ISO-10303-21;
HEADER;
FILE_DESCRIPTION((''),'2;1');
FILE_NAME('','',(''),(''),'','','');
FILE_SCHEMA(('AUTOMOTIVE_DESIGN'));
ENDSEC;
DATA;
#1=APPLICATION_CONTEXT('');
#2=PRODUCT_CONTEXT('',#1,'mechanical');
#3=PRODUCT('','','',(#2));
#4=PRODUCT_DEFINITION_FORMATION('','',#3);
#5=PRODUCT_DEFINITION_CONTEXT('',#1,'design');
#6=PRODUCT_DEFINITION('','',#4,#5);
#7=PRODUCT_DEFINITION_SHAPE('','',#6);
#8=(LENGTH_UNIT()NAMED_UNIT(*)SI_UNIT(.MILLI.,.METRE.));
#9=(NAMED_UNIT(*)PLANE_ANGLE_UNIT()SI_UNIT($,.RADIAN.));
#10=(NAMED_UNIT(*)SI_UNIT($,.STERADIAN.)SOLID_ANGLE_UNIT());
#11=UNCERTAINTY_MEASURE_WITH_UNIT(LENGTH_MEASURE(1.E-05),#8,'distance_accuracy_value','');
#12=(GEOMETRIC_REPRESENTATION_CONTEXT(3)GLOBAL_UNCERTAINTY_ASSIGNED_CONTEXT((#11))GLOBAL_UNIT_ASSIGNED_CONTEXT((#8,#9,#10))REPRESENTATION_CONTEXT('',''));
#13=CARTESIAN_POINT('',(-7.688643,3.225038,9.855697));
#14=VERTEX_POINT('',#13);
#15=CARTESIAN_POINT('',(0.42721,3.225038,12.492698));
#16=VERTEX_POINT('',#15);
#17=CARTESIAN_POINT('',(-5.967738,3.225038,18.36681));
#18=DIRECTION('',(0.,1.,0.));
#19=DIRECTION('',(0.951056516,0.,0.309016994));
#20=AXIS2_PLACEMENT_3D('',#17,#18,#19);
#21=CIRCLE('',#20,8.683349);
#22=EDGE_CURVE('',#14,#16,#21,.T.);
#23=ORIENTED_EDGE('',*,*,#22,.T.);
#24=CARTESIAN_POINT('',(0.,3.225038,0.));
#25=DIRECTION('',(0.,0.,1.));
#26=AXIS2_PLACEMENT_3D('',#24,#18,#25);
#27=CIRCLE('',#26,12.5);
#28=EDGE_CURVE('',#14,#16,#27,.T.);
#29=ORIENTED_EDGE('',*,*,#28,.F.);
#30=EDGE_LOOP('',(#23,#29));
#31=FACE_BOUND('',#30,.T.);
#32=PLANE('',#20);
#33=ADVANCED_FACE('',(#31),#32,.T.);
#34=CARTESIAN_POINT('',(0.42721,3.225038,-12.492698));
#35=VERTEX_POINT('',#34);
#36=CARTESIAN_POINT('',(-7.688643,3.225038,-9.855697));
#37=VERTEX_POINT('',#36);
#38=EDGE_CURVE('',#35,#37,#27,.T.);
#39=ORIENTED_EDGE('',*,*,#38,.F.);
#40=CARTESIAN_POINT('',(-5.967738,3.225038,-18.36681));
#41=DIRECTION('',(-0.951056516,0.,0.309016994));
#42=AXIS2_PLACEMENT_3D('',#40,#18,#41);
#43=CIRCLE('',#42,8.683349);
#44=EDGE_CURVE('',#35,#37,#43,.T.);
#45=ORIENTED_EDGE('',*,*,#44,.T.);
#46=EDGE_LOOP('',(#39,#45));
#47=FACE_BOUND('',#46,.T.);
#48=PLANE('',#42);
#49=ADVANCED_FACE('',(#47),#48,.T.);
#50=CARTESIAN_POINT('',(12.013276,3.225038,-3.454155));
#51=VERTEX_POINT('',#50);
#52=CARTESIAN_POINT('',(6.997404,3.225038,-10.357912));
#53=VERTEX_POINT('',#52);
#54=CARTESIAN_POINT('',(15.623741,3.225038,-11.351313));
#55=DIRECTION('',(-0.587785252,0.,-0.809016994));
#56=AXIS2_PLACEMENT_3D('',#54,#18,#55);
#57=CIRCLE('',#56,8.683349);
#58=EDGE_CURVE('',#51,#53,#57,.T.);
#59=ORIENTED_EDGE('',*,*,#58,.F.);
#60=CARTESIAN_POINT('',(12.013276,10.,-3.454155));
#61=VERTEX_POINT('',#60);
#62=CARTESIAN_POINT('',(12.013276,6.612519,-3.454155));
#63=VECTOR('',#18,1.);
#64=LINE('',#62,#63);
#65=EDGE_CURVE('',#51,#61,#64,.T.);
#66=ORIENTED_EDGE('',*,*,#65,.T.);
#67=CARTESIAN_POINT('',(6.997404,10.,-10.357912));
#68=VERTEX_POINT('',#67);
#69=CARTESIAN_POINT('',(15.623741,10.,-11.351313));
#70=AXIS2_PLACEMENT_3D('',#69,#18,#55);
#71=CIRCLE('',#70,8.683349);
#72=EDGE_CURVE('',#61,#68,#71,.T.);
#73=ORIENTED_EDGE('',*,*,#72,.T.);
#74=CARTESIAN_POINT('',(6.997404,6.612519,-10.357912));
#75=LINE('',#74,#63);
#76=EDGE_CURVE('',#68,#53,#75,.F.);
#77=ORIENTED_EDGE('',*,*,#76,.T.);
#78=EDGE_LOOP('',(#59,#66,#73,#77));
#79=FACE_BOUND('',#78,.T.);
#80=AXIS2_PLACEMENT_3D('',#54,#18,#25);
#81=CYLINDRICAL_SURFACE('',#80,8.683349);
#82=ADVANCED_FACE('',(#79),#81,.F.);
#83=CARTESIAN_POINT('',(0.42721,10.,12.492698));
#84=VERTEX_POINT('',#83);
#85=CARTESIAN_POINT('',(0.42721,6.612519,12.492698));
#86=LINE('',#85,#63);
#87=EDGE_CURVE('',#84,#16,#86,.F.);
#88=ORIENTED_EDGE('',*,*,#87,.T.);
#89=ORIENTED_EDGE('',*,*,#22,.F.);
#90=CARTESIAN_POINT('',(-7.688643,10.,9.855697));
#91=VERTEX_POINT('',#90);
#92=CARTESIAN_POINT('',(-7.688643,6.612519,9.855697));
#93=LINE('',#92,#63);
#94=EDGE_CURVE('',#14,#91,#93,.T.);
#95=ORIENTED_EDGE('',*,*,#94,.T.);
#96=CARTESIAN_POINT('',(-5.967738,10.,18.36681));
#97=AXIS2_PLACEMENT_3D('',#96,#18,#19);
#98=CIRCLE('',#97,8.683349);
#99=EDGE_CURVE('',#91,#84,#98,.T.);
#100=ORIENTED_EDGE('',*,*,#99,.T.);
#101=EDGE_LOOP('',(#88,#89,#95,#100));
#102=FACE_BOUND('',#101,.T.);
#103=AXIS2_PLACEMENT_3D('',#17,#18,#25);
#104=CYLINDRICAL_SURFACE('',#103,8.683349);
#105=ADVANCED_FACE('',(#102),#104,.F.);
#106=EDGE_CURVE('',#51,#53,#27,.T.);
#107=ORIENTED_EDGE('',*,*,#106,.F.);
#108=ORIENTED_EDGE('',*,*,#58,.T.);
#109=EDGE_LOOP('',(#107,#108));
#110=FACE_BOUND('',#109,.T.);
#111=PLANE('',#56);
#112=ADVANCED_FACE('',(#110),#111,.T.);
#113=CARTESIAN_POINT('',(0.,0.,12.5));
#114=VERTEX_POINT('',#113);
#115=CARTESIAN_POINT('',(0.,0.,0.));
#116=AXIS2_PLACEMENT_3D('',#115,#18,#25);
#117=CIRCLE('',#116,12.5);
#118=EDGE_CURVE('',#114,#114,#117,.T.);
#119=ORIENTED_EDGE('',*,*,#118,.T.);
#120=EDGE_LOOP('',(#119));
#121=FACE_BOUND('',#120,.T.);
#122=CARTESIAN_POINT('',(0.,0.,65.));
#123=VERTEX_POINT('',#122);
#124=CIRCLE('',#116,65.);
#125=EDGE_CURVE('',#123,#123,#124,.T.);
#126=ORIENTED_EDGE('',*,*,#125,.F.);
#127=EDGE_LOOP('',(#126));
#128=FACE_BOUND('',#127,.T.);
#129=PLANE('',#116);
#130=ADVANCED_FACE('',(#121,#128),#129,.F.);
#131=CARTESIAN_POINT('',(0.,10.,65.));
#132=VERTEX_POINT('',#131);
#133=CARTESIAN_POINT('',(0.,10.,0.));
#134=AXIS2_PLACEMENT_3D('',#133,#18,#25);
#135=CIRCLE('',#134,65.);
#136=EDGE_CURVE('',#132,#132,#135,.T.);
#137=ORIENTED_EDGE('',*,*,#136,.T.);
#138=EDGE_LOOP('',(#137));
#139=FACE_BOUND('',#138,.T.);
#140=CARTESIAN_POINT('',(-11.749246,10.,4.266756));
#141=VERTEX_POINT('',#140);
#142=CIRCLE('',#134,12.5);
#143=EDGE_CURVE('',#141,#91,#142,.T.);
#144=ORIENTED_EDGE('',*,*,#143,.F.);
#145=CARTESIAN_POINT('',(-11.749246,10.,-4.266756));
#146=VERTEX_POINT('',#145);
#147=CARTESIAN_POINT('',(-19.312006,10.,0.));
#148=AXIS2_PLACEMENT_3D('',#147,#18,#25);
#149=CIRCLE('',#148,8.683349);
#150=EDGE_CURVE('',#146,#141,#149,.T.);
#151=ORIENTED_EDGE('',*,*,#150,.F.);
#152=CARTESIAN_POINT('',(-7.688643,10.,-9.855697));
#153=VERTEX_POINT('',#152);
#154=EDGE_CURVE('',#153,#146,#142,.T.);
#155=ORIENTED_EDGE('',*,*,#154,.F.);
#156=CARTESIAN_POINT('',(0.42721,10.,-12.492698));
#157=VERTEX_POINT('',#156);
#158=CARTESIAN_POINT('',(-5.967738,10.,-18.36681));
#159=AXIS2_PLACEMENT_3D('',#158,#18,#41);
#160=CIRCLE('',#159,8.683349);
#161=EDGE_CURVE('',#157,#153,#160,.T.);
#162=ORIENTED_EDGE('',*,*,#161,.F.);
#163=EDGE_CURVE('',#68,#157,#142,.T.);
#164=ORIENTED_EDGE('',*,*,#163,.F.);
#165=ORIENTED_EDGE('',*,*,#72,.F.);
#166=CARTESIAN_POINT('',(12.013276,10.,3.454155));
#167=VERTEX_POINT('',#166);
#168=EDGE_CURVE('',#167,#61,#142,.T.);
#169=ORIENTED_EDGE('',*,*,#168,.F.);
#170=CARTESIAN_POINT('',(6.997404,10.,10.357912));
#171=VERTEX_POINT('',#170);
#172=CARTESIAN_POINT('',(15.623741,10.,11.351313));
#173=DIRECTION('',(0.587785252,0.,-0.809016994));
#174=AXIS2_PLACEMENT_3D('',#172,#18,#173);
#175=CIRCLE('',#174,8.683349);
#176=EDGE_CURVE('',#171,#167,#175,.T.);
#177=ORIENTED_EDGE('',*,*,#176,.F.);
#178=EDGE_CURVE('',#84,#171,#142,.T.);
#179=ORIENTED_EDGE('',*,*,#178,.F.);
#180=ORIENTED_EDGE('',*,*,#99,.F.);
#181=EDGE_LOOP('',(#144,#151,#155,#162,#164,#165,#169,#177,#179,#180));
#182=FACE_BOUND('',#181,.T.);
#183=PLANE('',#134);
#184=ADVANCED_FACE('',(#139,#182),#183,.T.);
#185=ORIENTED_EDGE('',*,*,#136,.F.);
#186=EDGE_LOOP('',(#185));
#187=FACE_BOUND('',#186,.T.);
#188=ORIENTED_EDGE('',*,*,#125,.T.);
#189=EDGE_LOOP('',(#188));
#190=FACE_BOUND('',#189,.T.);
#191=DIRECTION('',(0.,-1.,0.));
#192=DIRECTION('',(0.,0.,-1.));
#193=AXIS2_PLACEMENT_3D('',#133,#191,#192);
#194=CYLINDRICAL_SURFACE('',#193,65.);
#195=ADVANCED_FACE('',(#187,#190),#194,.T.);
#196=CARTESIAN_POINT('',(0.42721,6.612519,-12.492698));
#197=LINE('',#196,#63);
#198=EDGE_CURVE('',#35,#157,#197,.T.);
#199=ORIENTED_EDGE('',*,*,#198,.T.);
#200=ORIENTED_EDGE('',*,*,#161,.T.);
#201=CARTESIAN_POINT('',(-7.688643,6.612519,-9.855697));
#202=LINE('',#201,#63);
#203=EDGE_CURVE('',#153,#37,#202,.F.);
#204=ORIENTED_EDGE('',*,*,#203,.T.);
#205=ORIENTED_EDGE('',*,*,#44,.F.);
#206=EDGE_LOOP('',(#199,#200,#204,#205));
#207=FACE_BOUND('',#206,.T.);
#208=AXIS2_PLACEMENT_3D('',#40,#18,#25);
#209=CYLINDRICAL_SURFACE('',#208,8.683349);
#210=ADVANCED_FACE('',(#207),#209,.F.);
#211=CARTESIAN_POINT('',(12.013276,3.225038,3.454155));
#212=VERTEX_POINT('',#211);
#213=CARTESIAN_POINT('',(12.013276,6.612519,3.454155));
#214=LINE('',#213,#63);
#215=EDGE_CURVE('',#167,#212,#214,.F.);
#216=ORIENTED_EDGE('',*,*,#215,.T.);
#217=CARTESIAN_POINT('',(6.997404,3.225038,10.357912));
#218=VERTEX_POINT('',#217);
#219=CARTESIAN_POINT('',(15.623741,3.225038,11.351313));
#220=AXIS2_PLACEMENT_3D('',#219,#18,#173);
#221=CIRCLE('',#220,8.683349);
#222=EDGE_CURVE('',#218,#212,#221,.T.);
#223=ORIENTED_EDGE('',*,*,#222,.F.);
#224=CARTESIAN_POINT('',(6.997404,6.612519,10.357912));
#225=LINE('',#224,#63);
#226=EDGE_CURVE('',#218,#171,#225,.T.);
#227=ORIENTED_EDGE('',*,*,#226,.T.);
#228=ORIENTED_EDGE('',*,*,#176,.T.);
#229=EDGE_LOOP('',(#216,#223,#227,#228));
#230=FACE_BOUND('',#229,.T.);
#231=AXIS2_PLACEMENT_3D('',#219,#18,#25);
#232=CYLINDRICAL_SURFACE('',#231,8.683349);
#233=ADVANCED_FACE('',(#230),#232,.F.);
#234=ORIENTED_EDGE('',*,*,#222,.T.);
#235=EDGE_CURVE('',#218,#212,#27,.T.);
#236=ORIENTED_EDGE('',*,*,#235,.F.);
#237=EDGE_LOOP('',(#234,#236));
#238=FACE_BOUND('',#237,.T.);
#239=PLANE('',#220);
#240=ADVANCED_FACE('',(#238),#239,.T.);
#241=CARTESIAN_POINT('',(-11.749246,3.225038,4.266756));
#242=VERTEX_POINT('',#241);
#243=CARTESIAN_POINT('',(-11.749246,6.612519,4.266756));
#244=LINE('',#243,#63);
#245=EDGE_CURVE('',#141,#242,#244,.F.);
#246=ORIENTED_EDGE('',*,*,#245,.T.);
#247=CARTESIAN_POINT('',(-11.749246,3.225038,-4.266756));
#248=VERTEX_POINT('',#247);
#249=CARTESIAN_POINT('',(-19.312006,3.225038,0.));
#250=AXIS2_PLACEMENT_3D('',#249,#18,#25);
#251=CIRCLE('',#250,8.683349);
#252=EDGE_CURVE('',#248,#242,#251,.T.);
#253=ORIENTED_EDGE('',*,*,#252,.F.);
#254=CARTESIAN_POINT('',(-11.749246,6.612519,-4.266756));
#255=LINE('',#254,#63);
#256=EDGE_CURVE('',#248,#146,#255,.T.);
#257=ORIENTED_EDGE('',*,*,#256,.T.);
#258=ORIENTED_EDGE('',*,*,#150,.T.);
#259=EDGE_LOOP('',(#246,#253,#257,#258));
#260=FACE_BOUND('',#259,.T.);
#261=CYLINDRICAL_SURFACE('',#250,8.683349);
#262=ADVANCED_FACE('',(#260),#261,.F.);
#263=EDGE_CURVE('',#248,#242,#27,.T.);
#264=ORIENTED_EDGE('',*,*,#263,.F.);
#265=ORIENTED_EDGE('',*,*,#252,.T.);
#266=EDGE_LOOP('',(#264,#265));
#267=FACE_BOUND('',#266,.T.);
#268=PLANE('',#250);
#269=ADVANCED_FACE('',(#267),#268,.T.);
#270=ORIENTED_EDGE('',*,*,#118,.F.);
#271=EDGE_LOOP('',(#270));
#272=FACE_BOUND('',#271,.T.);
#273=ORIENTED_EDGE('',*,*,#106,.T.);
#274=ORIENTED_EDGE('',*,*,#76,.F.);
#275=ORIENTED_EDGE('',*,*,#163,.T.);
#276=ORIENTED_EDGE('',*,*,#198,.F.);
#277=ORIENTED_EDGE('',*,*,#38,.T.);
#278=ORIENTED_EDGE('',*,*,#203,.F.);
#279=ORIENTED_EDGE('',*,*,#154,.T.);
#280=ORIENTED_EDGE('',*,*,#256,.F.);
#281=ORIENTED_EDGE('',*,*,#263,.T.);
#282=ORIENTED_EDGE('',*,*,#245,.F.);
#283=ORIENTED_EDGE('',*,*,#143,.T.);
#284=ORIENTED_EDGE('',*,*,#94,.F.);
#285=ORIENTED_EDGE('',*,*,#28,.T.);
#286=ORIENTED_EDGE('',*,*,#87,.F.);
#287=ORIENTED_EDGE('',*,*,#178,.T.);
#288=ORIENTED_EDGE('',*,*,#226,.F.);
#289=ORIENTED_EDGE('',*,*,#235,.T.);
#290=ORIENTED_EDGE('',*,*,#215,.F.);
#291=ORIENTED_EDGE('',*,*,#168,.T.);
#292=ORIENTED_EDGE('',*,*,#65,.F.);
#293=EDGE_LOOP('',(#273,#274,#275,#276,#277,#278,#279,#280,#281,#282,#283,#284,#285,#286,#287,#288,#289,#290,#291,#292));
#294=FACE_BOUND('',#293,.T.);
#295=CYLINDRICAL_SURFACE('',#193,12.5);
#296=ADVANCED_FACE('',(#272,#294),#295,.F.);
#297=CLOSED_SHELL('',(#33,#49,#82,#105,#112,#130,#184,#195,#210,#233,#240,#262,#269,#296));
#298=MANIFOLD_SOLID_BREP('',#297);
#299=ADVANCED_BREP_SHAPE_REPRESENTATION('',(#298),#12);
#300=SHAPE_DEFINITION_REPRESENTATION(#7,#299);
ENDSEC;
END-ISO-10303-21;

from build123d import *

# Parameters (mm, degrees)
SKETCH1_R           = 65
BOSS_EXTRUDE1_DEPTH = 10
SKETCH2_R           = 12.5
CUT_EXTRUDE1_DEPTH  = 93.466210045
SKETCH3_R           = 8.683348951
CUT_EXTRUDE2_DEPTH  = 6.774962278
CIRPATTERN1_COUNT   = 5


with BuildPart() as part:
    # Sketch1 → Boss-Extrude1 (new body)
    with BuildSketch(Plane(origin=(0, 0, 0), x_dir=(1, 0, 0), z_dir=(0, 1, 0))):
        Circle(SKETCH1_R)
    extrude(amount=BOSS_EXTRUDE1_DEPTH)

    # Sketch2 → Cut-Extrude1 (cut, through all)
    with BuildSketch(Plane(origin=(0, 0, 0), x_dir=(1, 0, 0), z_dir=(0, 1, 0))):
        Circle(SKETCH2_R)
    extrude(amount=CUT_EXTRUDE1_DEPTH, mode=Mode.SUBTRACT)

    # Sketch3 → Cut-Extrude2 (cut)
    with BuildSketch(Plane(origin=(0, 10, 0), x_dir=(1, 0, 0), z_dir=(0, 1, 0))):
        with Locations((-19.31200649, 0)):
            Circle(SKETCH3_R)
    cut_extrude2 = extrude(amount=-CUT_EXTRUDE2_DEPTH, mode=Mode.SUBTRACT)

    # CirPattern1: Cut-Extrude2 ×5 about axis
    cirpattern1_axis = Axis((0, 0, 0), (0, 1, 0))
    for i in range(1, CIRPATTERN1_COUNT):
        add(cut_extrude2.rotate(cirpattern1_axis, i * 360 / CIRPATTERN1_COUNT), mode=Mode.SUBTRACT)


solid = part.part
